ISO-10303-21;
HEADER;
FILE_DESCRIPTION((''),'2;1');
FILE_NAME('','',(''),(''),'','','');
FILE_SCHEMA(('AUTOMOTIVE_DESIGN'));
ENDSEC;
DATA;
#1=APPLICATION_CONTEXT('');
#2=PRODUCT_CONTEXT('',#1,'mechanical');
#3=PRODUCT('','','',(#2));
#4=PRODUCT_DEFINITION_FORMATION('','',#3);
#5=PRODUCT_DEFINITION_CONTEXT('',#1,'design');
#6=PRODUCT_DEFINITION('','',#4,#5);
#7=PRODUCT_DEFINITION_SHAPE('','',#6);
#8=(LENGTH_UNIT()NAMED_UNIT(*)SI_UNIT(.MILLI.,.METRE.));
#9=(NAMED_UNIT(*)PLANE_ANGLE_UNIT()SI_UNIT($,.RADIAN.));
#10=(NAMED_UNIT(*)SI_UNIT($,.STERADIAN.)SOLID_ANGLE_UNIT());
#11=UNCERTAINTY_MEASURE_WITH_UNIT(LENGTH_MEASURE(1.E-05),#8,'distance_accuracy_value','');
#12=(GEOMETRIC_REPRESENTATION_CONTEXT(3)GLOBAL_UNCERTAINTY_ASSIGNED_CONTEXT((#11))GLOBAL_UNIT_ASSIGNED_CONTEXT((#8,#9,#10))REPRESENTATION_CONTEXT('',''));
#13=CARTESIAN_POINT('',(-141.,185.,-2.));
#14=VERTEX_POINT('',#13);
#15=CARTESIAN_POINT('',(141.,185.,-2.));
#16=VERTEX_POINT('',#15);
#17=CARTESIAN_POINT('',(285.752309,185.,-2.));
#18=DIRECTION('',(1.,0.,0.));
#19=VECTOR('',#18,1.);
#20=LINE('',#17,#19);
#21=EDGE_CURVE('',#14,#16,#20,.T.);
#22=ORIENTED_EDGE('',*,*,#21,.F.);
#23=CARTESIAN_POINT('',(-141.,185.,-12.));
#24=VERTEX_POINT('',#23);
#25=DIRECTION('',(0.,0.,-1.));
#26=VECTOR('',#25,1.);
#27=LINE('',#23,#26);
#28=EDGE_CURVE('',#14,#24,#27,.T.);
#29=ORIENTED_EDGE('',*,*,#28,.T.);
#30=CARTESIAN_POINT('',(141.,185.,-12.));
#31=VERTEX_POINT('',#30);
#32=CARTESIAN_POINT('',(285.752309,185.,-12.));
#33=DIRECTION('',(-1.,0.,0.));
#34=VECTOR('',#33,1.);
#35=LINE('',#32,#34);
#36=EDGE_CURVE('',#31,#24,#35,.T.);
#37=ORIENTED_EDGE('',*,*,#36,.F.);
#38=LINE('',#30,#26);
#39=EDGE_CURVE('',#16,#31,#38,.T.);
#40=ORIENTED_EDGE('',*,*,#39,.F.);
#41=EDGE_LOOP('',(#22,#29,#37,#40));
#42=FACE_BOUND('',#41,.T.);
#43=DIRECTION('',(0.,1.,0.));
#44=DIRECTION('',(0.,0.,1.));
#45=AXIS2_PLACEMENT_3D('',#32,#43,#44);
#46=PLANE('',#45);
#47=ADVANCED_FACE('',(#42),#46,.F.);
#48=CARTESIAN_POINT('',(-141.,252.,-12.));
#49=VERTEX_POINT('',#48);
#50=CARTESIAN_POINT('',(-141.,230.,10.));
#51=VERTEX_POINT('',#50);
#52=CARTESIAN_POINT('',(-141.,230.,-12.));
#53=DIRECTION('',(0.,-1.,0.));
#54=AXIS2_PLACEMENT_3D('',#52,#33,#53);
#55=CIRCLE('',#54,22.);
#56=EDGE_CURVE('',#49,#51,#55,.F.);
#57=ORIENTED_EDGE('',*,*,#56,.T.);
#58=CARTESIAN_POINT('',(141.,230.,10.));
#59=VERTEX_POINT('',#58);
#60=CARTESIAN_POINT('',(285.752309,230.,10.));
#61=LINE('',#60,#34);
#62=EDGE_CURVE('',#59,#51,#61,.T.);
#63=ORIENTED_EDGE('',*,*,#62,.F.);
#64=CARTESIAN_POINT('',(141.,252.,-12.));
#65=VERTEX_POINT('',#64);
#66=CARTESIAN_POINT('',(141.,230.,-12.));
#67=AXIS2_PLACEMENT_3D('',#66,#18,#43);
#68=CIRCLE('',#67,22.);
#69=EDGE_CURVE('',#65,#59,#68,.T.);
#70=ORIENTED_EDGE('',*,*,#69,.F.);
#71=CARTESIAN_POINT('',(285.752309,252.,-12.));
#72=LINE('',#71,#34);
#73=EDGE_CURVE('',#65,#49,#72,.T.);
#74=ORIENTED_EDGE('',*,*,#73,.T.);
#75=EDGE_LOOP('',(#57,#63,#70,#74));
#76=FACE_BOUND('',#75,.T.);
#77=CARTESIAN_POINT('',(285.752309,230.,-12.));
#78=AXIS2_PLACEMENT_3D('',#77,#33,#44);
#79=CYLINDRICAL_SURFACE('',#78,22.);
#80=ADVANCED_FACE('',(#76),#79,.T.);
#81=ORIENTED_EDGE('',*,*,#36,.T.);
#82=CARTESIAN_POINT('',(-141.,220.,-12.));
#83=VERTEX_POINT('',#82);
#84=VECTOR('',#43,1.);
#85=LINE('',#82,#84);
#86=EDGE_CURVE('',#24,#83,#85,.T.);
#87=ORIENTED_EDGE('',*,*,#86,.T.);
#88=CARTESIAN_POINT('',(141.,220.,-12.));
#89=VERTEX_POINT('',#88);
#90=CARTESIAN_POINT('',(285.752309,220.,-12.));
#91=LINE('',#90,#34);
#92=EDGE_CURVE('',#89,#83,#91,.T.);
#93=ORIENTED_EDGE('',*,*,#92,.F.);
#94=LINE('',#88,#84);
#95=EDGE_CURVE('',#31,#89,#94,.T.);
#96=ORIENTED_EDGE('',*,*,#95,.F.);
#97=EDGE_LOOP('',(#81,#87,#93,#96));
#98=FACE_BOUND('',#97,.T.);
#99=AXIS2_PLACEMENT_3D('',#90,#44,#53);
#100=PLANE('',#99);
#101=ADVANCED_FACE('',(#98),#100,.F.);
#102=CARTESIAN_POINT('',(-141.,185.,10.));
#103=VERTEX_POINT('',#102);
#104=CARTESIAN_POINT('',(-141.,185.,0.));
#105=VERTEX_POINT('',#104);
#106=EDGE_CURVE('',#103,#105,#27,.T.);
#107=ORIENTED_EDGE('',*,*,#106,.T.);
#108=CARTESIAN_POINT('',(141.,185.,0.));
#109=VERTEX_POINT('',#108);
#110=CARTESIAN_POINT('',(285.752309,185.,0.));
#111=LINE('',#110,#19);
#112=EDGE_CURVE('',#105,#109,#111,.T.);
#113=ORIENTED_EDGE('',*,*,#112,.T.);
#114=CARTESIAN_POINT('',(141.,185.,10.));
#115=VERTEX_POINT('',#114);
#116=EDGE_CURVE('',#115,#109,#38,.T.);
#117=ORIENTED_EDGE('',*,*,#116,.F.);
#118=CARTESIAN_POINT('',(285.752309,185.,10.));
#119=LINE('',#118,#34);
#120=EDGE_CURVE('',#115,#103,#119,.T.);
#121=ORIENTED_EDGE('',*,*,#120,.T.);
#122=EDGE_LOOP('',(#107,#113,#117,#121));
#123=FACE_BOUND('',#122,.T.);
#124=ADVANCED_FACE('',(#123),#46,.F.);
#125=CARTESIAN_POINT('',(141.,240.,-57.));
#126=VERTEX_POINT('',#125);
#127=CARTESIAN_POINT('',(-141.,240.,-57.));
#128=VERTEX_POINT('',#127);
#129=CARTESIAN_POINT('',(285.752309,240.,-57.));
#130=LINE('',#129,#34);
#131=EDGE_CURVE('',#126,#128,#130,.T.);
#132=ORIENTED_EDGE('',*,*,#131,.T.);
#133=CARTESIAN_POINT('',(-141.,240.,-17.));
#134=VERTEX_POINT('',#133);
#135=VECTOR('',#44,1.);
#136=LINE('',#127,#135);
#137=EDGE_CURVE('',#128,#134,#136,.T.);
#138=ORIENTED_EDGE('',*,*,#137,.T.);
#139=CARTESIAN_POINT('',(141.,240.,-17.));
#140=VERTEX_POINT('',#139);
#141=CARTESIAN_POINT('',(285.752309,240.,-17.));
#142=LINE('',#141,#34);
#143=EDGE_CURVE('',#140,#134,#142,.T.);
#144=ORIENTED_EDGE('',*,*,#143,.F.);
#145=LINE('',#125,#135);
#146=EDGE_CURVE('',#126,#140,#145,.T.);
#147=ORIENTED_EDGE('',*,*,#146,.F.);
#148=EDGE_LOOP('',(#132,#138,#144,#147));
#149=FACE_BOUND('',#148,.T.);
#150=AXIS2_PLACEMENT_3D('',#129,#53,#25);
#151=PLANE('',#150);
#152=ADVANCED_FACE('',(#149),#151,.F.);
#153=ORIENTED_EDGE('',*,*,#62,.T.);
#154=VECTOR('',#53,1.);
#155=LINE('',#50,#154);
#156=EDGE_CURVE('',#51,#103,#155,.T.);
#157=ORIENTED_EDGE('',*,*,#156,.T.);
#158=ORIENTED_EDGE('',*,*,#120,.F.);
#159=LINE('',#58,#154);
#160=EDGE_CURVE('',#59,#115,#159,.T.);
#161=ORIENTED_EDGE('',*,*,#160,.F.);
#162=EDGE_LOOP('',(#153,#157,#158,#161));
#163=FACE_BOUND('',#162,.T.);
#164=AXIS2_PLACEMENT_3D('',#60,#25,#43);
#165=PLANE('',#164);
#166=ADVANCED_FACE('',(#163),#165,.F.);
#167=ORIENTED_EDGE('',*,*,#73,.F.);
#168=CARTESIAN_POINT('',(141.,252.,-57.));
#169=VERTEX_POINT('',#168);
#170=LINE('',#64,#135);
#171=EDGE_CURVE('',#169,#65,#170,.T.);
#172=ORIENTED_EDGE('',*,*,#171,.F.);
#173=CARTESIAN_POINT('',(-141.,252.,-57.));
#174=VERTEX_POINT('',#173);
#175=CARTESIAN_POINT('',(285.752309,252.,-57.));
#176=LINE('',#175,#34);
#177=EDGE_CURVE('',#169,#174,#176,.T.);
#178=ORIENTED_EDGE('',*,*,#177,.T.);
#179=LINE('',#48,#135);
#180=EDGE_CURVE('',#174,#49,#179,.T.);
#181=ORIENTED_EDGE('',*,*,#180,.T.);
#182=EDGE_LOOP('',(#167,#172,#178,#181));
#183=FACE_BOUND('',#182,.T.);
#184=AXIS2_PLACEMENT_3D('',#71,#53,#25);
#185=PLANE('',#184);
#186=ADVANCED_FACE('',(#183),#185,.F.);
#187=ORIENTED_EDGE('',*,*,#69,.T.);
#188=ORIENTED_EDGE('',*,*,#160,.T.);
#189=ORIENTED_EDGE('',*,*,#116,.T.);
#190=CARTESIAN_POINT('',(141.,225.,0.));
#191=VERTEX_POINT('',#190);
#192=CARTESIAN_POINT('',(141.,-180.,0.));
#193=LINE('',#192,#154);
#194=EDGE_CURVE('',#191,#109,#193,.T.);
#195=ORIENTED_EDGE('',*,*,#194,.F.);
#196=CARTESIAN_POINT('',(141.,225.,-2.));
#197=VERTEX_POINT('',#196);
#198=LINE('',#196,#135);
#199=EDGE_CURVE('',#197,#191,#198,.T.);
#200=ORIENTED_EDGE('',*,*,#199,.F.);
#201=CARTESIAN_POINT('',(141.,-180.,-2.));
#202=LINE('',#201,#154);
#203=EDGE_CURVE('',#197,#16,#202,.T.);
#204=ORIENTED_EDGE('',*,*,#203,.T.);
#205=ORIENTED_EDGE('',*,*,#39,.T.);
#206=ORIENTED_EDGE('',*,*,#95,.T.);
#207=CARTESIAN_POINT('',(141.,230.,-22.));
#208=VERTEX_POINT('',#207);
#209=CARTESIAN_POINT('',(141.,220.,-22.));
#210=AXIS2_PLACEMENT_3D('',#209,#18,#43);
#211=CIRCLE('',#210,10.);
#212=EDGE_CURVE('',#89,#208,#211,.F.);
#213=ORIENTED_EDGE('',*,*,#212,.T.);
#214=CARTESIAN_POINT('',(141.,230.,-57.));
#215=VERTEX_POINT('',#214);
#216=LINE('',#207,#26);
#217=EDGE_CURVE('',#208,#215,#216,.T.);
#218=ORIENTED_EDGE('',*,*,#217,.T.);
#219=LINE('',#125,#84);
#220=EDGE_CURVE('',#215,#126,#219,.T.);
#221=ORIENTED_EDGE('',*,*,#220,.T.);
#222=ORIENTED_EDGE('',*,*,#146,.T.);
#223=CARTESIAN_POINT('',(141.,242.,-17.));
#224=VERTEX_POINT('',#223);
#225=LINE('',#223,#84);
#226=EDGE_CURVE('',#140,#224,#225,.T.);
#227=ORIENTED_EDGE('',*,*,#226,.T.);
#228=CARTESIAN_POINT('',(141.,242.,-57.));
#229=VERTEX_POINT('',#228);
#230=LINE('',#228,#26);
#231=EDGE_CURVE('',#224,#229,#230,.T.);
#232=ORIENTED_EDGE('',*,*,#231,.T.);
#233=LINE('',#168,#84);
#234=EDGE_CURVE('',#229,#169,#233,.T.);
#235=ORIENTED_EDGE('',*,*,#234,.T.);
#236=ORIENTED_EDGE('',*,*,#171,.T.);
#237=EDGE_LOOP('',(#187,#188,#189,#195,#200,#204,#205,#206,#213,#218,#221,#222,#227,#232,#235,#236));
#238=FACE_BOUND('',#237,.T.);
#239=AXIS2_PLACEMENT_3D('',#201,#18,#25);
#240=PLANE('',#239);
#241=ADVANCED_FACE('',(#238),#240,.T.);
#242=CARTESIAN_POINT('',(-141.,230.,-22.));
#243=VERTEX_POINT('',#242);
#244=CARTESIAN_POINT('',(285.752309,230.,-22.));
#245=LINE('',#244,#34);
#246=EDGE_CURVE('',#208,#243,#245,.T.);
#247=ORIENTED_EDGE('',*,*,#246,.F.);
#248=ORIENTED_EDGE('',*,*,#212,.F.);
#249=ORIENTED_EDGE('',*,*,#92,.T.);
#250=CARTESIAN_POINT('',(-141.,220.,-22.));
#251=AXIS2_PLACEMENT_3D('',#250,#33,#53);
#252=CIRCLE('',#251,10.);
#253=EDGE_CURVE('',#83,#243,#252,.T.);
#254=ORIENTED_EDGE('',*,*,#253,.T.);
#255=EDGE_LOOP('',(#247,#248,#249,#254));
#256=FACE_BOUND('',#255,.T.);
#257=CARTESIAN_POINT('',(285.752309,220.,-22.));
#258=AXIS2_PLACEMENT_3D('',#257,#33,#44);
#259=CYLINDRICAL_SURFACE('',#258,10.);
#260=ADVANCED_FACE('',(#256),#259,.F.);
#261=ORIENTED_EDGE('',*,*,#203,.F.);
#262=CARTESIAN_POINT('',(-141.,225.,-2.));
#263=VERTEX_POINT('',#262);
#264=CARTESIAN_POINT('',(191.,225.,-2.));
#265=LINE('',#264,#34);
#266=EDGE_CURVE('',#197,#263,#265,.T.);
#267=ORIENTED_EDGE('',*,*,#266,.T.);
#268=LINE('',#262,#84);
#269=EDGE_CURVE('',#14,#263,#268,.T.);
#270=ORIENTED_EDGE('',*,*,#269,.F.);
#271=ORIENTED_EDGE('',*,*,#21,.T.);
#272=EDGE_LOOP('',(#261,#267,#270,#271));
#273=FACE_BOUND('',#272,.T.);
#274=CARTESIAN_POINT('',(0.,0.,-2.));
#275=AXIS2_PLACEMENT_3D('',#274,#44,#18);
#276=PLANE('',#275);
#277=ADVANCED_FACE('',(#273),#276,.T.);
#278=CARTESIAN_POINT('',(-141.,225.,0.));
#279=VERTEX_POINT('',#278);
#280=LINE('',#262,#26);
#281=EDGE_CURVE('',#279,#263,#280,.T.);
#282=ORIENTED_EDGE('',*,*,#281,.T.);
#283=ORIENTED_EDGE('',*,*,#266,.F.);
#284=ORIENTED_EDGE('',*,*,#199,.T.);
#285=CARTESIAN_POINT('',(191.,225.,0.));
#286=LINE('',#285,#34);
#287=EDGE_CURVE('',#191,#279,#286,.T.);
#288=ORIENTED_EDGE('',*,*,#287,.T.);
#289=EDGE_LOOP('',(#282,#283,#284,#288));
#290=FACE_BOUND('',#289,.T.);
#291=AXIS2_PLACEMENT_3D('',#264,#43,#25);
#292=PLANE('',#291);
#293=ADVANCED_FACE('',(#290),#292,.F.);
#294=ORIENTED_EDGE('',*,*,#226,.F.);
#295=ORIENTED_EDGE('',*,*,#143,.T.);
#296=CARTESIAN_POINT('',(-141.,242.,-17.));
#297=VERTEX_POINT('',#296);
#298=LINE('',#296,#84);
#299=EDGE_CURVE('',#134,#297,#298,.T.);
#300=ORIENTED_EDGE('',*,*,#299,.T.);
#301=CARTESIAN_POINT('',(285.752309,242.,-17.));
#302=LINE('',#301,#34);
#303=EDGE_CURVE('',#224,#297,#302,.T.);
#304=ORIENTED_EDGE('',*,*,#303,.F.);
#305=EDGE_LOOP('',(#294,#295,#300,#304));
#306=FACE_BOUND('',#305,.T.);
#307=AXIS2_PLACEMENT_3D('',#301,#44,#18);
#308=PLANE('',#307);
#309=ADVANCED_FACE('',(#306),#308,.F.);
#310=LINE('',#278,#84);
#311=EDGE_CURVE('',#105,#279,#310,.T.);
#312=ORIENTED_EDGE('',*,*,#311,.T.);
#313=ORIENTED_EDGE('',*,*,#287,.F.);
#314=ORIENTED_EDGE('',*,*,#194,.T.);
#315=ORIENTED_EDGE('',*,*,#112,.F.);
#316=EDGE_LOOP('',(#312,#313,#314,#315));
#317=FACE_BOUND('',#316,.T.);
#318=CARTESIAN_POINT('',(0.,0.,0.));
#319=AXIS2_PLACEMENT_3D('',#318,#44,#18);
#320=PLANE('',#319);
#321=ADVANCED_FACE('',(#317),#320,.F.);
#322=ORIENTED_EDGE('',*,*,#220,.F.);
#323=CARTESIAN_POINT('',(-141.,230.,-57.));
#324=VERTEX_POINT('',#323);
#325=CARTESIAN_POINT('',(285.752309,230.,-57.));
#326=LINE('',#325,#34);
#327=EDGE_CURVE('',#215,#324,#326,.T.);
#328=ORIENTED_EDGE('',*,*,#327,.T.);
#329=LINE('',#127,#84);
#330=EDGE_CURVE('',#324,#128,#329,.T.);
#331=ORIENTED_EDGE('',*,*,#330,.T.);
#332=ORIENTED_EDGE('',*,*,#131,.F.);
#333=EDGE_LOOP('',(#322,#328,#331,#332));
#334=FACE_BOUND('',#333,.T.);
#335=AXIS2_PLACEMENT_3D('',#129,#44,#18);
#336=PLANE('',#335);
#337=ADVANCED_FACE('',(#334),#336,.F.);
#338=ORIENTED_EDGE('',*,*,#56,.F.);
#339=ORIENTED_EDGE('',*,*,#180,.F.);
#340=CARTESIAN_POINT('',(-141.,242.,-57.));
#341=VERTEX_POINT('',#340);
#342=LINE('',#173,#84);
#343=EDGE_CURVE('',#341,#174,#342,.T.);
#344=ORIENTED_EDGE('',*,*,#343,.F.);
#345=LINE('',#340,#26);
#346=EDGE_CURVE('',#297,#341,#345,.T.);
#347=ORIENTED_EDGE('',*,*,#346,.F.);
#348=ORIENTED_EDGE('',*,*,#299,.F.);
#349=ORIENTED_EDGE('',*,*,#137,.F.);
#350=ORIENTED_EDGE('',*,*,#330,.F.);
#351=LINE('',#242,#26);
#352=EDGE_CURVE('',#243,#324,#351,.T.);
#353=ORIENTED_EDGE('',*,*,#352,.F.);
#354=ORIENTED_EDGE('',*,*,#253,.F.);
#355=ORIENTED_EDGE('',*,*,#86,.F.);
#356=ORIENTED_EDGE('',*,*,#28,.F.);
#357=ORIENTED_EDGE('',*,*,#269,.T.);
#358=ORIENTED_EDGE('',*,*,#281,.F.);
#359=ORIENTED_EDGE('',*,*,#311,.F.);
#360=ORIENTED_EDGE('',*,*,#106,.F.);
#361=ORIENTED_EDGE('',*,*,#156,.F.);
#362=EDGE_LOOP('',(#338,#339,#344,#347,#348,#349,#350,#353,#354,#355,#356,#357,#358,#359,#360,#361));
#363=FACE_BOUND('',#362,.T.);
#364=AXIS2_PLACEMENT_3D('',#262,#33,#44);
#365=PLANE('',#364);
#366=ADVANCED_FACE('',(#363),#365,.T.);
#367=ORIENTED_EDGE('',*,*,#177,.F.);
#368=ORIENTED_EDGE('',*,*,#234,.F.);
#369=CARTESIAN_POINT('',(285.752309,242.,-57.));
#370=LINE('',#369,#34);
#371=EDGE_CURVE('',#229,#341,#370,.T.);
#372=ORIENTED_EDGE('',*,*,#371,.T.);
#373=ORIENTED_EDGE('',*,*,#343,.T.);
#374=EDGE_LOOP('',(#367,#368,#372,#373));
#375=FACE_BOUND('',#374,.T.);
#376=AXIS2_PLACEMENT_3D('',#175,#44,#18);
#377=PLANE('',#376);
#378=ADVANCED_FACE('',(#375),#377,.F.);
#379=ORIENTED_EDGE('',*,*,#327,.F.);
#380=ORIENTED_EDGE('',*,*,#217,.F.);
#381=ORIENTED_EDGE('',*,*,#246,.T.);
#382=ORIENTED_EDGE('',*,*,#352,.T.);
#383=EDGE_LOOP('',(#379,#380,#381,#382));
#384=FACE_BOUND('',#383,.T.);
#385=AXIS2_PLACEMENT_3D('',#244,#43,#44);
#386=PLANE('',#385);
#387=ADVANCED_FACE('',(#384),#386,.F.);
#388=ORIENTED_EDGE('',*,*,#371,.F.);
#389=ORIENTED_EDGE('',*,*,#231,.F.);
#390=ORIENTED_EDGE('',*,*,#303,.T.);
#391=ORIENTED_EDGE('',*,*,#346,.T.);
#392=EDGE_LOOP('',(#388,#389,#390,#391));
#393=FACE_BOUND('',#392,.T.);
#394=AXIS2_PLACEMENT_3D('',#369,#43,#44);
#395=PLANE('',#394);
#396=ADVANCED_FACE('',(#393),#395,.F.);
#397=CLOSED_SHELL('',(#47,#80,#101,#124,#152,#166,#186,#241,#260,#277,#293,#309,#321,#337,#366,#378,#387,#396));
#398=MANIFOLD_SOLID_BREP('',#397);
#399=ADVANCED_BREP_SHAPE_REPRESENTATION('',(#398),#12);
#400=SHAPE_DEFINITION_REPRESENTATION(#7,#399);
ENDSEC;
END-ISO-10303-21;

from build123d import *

# Parameters (mm, degrees)
BOSS_EXTRUDE1_DEPTH      = 141
BOSS_EXTRUDE1_DEPTH_BACK = 141
CAVITY1_START            = -2
CAVITY1_OUTLINE_W        = 282
CAVITY1_OUTLINE_H        = 40
CAVITY1_DEPTH            = 2


# Read off the part's stored shape, not the designer's step: Cavity1
with BuildPart() as part:
    # Sketch2 → Boss-Extrude1 (new, two sides: drawn at the far end of the back side and taken through both)
    with BuildSketch(Plane(origin=(0, 0, 0), x_dir=(0, 0, -1), z_dir=(1, 0, 0)).offset(-BOSS_EXTRUDE1_DEPTH_BACK)):
        with BuildLine():
            Line((12, 220), (12, 185))
            Line((12, 185), (-10, 185))
            Line((-10, 185), (-10, 230))
            ThreePointArc((-10, 230), (-3.556349186, 245.556349186), (12, 252))
            Line((12, 252), (57, 252))
            Line((57, 252), (57, 242))
            Line((57, 242), (17, 242))
            Line((17, 242), (17, 240))
            Line((17, 240), (57, 240))
            Line((57, 240), (57, 230))
            Line((57, 230), (22, 230))
            ThreePointArc((22, 230), (14.928932188, 227.071067812), (12, 220))
        make_face()
    extrude(amount=BOSS_EXTRUDE1_DEPTH + BOSS_EXTRUDE1_DEPTH_BACK)

    # Cavity1 outline → Cavity1 (cut)
    with BuildSketch(Plane.XY.offset(CAVITY1_START)):
        with Locations((0, 205)):
            Rectangle(CAVITY1_OUTLINE_W, CAVITY1_OUTLINE_H)
    extrude(amount=CAVITY1_DEPTH, mode=Mode.SUBTRACT)


solid = part.part
